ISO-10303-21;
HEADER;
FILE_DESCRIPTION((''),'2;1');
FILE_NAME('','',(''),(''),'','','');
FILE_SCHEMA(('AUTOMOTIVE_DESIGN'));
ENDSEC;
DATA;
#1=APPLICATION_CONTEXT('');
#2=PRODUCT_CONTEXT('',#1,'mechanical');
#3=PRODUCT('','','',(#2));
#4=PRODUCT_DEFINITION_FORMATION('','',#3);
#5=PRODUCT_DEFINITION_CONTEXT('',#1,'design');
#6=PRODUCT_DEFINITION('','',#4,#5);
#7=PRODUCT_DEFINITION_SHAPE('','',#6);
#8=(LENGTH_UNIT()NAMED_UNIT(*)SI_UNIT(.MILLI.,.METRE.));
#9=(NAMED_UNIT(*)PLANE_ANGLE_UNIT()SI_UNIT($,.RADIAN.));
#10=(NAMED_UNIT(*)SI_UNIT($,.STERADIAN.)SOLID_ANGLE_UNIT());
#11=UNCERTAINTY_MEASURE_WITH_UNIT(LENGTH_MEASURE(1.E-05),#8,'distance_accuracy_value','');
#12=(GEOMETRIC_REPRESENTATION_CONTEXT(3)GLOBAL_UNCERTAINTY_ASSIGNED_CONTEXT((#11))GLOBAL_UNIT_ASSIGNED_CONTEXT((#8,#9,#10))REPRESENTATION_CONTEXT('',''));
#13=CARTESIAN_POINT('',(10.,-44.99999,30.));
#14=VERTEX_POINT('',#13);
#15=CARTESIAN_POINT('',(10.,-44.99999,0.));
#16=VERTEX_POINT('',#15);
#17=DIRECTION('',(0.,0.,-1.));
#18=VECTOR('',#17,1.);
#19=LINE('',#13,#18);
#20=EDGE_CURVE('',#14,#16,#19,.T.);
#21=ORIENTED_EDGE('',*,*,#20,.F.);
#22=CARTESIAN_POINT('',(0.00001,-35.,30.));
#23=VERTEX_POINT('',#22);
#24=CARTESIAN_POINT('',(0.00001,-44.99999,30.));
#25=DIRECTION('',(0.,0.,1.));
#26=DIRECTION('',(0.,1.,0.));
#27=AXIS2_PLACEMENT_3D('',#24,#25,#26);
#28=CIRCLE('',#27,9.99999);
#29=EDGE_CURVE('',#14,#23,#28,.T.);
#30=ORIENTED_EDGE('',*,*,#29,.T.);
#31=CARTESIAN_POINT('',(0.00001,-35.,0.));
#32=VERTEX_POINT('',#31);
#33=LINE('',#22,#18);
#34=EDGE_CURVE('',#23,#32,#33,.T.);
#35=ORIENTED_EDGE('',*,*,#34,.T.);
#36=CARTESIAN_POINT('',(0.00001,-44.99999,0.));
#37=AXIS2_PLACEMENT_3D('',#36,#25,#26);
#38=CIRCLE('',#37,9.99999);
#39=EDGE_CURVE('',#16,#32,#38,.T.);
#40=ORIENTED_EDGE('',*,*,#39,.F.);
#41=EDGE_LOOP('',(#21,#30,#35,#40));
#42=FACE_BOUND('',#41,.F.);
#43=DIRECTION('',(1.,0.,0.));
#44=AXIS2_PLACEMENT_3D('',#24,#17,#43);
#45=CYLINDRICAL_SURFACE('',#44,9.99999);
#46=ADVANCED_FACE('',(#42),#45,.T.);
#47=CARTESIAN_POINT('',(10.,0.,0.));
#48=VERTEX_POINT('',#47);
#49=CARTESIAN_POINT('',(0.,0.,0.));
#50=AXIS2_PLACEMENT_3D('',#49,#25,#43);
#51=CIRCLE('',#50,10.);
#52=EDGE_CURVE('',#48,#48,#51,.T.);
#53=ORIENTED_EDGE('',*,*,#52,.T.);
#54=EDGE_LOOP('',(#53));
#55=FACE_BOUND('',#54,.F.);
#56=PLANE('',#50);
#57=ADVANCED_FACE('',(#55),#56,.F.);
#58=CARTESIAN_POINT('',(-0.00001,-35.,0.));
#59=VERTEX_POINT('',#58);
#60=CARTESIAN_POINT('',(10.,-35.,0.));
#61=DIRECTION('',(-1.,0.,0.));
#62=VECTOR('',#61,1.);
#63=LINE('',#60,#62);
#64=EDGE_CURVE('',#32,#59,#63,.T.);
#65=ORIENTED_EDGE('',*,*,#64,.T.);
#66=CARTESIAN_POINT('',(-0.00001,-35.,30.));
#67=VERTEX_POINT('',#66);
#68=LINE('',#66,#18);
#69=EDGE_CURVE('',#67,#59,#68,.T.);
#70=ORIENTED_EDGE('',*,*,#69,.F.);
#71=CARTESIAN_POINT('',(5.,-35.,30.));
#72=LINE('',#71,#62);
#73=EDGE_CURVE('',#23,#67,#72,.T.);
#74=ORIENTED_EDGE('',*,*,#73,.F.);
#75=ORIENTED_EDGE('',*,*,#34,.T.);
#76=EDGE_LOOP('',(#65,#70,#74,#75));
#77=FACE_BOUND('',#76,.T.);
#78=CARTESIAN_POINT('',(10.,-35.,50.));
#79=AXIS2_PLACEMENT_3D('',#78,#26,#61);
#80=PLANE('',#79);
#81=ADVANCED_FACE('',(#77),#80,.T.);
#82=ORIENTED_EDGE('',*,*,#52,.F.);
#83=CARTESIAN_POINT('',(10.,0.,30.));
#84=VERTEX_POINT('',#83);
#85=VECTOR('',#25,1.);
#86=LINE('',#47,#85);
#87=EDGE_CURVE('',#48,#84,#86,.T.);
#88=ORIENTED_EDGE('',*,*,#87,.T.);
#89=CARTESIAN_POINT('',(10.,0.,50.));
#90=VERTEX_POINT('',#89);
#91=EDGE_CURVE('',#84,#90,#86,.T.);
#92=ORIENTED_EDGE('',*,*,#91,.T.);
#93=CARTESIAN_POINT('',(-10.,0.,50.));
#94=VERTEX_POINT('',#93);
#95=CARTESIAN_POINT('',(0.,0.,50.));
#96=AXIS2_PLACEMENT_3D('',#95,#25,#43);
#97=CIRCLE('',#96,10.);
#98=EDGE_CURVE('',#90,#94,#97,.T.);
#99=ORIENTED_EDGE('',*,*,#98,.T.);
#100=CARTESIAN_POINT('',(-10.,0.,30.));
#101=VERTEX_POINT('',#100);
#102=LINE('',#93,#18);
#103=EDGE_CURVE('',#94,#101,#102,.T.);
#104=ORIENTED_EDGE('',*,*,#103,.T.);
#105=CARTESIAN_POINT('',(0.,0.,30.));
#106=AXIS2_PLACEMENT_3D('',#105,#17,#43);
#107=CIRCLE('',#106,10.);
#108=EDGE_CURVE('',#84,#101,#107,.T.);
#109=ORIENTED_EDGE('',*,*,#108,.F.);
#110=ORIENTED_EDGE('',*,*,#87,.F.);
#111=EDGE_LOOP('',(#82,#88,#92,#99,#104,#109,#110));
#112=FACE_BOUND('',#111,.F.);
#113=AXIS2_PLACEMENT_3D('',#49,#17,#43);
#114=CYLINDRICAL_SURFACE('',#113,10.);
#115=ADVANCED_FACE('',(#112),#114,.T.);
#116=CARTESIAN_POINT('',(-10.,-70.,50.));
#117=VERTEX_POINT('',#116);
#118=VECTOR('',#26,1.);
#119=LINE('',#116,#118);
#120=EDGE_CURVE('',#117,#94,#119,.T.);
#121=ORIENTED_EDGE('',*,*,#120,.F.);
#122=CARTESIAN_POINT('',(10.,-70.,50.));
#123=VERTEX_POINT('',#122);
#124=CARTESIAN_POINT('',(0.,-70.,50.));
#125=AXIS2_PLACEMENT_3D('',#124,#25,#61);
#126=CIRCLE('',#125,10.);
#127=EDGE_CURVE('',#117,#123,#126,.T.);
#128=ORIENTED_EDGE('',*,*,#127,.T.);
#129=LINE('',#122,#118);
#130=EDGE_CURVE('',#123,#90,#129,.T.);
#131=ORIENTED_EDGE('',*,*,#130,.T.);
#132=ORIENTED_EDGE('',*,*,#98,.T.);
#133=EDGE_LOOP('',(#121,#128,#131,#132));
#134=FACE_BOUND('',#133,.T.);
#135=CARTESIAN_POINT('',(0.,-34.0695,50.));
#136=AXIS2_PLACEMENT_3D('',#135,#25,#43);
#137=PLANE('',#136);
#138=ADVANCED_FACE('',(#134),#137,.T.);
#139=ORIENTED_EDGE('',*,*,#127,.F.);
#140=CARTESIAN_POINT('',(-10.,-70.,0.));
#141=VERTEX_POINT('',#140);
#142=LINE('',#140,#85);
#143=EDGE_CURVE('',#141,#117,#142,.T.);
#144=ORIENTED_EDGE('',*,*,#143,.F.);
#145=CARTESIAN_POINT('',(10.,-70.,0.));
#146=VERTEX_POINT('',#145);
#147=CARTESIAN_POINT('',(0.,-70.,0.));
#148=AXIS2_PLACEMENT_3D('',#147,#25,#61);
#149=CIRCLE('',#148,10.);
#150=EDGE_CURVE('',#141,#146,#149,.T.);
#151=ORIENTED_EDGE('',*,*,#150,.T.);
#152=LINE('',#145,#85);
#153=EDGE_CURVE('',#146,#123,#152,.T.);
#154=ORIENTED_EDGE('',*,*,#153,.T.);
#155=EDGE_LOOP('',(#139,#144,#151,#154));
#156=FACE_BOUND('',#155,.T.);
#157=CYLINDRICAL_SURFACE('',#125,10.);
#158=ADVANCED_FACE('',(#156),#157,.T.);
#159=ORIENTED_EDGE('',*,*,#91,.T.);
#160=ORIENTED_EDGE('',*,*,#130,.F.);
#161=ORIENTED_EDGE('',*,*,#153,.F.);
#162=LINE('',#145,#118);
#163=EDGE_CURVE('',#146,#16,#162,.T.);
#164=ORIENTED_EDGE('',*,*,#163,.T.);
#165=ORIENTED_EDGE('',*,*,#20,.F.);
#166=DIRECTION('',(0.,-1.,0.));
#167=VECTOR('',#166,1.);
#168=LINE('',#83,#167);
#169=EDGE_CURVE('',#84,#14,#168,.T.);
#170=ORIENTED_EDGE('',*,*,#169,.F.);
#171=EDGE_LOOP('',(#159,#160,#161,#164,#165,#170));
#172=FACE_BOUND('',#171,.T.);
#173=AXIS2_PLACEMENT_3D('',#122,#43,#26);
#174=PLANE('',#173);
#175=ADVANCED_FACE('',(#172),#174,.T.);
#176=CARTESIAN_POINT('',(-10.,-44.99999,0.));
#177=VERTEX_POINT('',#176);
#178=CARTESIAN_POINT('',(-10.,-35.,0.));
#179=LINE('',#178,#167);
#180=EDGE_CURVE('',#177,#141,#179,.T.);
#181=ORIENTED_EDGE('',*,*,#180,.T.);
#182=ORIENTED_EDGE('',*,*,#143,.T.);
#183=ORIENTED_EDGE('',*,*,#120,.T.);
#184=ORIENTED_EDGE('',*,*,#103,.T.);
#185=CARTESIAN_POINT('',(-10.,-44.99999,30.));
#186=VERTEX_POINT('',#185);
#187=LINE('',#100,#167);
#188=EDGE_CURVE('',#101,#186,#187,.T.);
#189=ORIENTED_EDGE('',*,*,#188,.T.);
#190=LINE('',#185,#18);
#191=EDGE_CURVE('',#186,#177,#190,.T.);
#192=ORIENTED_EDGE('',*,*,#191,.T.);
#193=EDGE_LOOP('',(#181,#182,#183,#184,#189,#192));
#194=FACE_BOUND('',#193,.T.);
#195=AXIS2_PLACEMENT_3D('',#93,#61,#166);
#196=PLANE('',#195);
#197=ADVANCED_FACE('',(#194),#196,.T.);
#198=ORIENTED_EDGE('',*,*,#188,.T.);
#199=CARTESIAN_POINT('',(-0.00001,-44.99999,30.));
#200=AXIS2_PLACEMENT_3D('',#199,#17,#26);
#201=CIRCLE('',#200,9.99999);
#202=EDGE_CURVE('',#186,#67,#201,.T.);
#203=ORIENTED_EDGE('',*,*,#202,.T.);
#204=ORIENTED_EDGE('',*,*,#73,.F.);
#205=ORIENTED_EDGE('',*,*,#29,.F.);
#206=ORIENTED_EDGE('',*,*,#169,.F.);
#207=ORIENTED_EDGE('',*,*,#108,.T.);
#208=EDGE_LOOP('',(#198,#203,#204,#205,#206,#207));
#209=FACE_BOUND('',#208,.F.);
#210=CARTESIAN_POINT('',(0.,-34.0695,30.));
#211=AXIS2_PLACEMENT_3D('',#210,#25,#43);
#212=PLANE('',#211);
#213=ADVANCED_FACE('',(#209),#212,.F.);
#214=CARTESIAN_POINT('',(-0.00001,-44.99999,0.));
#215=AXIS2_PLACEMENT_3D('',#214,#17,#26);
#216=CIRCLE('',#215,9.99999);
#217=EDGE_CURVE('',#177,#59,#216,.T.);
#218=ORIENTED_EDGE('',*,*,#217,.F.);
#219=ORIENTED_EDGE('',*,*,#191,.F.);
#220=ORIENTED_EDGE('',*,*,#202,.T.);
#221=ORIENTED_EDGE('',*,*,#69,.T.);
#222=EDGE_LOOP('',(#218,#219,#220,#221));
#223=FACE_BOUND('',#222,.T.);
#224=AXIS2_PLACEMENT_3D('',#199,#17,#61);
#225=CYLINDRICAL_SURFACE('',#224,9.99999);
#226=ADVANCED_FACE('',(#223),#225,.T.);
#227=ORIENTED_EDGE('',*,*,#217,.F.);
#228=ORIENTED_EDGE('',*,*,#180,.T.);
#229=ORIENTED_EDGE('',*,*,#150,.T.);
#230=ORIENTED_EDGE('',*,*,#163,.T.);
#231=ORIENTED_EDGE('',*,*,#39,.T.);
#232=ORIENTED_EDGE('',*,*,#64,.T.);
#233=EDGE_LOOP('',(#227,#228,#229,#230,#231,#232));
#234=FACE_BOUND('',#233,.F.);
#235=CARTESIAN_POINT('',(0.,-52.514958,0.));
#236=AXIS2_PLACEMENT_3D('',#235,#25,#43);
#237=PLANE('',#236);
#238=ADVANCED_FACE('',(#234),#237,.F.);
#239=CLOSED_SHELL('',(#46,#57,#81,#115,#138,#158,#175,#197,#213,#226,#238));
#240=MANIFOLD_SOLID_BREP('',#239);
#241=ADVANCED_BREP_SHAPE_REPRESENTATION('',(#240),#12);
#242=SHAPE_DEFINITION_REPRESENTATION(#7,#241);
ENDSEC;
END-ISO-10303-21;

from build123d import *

# Parameters (mm, degrees)
F0_R     = 10
F1_DEPTH = 50
F3_DEPTH = 20
F5_DEPTH = 50
F6_R     = 9.99999


# Not quite as in the source:
# - a fillet or chamfer is up to 0.001 mm smaller than in the source, because OpenCascade refuses the exact size


with BuildPart() as f1:
    # F0 (on Top) → F1 (new body)
    with BuildSketch(Plane.XY):
        Circle(F0_R)
    extrude(amount=F1_DEPTH)

    # F2 (on face) → F3 (join)
    with BuildSketch(Plane.XY.offset(50)):
        with BuildLine():
            ThreePointArc((10, 0), (0, -10), (-10, 0))
            Line((-10, 0), (-10, -70))
            Line((-10, -70), (10, -70))
            Line((10, -70), (10, 0))
        make_face()
    extrude(amount=-F3_DEPTH)

    # F4 (on face) → F5 (join)
    with BuildSketch(Plane.XY.offset(50)):
        with BuildLine():
            Line((-10, -35), (-10, -70))
            ThreePointArc((-10, -70), (0, -60), (10, -70))
            Line((10, -70), (10, -35))
            Line((10, -35), (-10, -35))
        make_face()
        with BuildLine():
            ThreePointArc((10, -70), (0, -60), (-10, -70))
            Line((-10, -70), (10, -70))
        make_face()
        with BuildLine():
            Line((10, -70), (-10, -70))
            ThreePointArc((-10, -70), (0, -80), (10, -70))
        make_face()
    extrude(amount=-F5_DEPTH)

    # F6 (radius 10 in the source; OpenCascade refuses exactly that, so slightly less here)
    f6_edges = [f1.edges().sort_by_distance(p)[0] for p in [
        (10, -35, 15),
        (-10, -35, 15),
    ]]
    fillet(f6_edges, radius=F6_R)


solid = f1.part
